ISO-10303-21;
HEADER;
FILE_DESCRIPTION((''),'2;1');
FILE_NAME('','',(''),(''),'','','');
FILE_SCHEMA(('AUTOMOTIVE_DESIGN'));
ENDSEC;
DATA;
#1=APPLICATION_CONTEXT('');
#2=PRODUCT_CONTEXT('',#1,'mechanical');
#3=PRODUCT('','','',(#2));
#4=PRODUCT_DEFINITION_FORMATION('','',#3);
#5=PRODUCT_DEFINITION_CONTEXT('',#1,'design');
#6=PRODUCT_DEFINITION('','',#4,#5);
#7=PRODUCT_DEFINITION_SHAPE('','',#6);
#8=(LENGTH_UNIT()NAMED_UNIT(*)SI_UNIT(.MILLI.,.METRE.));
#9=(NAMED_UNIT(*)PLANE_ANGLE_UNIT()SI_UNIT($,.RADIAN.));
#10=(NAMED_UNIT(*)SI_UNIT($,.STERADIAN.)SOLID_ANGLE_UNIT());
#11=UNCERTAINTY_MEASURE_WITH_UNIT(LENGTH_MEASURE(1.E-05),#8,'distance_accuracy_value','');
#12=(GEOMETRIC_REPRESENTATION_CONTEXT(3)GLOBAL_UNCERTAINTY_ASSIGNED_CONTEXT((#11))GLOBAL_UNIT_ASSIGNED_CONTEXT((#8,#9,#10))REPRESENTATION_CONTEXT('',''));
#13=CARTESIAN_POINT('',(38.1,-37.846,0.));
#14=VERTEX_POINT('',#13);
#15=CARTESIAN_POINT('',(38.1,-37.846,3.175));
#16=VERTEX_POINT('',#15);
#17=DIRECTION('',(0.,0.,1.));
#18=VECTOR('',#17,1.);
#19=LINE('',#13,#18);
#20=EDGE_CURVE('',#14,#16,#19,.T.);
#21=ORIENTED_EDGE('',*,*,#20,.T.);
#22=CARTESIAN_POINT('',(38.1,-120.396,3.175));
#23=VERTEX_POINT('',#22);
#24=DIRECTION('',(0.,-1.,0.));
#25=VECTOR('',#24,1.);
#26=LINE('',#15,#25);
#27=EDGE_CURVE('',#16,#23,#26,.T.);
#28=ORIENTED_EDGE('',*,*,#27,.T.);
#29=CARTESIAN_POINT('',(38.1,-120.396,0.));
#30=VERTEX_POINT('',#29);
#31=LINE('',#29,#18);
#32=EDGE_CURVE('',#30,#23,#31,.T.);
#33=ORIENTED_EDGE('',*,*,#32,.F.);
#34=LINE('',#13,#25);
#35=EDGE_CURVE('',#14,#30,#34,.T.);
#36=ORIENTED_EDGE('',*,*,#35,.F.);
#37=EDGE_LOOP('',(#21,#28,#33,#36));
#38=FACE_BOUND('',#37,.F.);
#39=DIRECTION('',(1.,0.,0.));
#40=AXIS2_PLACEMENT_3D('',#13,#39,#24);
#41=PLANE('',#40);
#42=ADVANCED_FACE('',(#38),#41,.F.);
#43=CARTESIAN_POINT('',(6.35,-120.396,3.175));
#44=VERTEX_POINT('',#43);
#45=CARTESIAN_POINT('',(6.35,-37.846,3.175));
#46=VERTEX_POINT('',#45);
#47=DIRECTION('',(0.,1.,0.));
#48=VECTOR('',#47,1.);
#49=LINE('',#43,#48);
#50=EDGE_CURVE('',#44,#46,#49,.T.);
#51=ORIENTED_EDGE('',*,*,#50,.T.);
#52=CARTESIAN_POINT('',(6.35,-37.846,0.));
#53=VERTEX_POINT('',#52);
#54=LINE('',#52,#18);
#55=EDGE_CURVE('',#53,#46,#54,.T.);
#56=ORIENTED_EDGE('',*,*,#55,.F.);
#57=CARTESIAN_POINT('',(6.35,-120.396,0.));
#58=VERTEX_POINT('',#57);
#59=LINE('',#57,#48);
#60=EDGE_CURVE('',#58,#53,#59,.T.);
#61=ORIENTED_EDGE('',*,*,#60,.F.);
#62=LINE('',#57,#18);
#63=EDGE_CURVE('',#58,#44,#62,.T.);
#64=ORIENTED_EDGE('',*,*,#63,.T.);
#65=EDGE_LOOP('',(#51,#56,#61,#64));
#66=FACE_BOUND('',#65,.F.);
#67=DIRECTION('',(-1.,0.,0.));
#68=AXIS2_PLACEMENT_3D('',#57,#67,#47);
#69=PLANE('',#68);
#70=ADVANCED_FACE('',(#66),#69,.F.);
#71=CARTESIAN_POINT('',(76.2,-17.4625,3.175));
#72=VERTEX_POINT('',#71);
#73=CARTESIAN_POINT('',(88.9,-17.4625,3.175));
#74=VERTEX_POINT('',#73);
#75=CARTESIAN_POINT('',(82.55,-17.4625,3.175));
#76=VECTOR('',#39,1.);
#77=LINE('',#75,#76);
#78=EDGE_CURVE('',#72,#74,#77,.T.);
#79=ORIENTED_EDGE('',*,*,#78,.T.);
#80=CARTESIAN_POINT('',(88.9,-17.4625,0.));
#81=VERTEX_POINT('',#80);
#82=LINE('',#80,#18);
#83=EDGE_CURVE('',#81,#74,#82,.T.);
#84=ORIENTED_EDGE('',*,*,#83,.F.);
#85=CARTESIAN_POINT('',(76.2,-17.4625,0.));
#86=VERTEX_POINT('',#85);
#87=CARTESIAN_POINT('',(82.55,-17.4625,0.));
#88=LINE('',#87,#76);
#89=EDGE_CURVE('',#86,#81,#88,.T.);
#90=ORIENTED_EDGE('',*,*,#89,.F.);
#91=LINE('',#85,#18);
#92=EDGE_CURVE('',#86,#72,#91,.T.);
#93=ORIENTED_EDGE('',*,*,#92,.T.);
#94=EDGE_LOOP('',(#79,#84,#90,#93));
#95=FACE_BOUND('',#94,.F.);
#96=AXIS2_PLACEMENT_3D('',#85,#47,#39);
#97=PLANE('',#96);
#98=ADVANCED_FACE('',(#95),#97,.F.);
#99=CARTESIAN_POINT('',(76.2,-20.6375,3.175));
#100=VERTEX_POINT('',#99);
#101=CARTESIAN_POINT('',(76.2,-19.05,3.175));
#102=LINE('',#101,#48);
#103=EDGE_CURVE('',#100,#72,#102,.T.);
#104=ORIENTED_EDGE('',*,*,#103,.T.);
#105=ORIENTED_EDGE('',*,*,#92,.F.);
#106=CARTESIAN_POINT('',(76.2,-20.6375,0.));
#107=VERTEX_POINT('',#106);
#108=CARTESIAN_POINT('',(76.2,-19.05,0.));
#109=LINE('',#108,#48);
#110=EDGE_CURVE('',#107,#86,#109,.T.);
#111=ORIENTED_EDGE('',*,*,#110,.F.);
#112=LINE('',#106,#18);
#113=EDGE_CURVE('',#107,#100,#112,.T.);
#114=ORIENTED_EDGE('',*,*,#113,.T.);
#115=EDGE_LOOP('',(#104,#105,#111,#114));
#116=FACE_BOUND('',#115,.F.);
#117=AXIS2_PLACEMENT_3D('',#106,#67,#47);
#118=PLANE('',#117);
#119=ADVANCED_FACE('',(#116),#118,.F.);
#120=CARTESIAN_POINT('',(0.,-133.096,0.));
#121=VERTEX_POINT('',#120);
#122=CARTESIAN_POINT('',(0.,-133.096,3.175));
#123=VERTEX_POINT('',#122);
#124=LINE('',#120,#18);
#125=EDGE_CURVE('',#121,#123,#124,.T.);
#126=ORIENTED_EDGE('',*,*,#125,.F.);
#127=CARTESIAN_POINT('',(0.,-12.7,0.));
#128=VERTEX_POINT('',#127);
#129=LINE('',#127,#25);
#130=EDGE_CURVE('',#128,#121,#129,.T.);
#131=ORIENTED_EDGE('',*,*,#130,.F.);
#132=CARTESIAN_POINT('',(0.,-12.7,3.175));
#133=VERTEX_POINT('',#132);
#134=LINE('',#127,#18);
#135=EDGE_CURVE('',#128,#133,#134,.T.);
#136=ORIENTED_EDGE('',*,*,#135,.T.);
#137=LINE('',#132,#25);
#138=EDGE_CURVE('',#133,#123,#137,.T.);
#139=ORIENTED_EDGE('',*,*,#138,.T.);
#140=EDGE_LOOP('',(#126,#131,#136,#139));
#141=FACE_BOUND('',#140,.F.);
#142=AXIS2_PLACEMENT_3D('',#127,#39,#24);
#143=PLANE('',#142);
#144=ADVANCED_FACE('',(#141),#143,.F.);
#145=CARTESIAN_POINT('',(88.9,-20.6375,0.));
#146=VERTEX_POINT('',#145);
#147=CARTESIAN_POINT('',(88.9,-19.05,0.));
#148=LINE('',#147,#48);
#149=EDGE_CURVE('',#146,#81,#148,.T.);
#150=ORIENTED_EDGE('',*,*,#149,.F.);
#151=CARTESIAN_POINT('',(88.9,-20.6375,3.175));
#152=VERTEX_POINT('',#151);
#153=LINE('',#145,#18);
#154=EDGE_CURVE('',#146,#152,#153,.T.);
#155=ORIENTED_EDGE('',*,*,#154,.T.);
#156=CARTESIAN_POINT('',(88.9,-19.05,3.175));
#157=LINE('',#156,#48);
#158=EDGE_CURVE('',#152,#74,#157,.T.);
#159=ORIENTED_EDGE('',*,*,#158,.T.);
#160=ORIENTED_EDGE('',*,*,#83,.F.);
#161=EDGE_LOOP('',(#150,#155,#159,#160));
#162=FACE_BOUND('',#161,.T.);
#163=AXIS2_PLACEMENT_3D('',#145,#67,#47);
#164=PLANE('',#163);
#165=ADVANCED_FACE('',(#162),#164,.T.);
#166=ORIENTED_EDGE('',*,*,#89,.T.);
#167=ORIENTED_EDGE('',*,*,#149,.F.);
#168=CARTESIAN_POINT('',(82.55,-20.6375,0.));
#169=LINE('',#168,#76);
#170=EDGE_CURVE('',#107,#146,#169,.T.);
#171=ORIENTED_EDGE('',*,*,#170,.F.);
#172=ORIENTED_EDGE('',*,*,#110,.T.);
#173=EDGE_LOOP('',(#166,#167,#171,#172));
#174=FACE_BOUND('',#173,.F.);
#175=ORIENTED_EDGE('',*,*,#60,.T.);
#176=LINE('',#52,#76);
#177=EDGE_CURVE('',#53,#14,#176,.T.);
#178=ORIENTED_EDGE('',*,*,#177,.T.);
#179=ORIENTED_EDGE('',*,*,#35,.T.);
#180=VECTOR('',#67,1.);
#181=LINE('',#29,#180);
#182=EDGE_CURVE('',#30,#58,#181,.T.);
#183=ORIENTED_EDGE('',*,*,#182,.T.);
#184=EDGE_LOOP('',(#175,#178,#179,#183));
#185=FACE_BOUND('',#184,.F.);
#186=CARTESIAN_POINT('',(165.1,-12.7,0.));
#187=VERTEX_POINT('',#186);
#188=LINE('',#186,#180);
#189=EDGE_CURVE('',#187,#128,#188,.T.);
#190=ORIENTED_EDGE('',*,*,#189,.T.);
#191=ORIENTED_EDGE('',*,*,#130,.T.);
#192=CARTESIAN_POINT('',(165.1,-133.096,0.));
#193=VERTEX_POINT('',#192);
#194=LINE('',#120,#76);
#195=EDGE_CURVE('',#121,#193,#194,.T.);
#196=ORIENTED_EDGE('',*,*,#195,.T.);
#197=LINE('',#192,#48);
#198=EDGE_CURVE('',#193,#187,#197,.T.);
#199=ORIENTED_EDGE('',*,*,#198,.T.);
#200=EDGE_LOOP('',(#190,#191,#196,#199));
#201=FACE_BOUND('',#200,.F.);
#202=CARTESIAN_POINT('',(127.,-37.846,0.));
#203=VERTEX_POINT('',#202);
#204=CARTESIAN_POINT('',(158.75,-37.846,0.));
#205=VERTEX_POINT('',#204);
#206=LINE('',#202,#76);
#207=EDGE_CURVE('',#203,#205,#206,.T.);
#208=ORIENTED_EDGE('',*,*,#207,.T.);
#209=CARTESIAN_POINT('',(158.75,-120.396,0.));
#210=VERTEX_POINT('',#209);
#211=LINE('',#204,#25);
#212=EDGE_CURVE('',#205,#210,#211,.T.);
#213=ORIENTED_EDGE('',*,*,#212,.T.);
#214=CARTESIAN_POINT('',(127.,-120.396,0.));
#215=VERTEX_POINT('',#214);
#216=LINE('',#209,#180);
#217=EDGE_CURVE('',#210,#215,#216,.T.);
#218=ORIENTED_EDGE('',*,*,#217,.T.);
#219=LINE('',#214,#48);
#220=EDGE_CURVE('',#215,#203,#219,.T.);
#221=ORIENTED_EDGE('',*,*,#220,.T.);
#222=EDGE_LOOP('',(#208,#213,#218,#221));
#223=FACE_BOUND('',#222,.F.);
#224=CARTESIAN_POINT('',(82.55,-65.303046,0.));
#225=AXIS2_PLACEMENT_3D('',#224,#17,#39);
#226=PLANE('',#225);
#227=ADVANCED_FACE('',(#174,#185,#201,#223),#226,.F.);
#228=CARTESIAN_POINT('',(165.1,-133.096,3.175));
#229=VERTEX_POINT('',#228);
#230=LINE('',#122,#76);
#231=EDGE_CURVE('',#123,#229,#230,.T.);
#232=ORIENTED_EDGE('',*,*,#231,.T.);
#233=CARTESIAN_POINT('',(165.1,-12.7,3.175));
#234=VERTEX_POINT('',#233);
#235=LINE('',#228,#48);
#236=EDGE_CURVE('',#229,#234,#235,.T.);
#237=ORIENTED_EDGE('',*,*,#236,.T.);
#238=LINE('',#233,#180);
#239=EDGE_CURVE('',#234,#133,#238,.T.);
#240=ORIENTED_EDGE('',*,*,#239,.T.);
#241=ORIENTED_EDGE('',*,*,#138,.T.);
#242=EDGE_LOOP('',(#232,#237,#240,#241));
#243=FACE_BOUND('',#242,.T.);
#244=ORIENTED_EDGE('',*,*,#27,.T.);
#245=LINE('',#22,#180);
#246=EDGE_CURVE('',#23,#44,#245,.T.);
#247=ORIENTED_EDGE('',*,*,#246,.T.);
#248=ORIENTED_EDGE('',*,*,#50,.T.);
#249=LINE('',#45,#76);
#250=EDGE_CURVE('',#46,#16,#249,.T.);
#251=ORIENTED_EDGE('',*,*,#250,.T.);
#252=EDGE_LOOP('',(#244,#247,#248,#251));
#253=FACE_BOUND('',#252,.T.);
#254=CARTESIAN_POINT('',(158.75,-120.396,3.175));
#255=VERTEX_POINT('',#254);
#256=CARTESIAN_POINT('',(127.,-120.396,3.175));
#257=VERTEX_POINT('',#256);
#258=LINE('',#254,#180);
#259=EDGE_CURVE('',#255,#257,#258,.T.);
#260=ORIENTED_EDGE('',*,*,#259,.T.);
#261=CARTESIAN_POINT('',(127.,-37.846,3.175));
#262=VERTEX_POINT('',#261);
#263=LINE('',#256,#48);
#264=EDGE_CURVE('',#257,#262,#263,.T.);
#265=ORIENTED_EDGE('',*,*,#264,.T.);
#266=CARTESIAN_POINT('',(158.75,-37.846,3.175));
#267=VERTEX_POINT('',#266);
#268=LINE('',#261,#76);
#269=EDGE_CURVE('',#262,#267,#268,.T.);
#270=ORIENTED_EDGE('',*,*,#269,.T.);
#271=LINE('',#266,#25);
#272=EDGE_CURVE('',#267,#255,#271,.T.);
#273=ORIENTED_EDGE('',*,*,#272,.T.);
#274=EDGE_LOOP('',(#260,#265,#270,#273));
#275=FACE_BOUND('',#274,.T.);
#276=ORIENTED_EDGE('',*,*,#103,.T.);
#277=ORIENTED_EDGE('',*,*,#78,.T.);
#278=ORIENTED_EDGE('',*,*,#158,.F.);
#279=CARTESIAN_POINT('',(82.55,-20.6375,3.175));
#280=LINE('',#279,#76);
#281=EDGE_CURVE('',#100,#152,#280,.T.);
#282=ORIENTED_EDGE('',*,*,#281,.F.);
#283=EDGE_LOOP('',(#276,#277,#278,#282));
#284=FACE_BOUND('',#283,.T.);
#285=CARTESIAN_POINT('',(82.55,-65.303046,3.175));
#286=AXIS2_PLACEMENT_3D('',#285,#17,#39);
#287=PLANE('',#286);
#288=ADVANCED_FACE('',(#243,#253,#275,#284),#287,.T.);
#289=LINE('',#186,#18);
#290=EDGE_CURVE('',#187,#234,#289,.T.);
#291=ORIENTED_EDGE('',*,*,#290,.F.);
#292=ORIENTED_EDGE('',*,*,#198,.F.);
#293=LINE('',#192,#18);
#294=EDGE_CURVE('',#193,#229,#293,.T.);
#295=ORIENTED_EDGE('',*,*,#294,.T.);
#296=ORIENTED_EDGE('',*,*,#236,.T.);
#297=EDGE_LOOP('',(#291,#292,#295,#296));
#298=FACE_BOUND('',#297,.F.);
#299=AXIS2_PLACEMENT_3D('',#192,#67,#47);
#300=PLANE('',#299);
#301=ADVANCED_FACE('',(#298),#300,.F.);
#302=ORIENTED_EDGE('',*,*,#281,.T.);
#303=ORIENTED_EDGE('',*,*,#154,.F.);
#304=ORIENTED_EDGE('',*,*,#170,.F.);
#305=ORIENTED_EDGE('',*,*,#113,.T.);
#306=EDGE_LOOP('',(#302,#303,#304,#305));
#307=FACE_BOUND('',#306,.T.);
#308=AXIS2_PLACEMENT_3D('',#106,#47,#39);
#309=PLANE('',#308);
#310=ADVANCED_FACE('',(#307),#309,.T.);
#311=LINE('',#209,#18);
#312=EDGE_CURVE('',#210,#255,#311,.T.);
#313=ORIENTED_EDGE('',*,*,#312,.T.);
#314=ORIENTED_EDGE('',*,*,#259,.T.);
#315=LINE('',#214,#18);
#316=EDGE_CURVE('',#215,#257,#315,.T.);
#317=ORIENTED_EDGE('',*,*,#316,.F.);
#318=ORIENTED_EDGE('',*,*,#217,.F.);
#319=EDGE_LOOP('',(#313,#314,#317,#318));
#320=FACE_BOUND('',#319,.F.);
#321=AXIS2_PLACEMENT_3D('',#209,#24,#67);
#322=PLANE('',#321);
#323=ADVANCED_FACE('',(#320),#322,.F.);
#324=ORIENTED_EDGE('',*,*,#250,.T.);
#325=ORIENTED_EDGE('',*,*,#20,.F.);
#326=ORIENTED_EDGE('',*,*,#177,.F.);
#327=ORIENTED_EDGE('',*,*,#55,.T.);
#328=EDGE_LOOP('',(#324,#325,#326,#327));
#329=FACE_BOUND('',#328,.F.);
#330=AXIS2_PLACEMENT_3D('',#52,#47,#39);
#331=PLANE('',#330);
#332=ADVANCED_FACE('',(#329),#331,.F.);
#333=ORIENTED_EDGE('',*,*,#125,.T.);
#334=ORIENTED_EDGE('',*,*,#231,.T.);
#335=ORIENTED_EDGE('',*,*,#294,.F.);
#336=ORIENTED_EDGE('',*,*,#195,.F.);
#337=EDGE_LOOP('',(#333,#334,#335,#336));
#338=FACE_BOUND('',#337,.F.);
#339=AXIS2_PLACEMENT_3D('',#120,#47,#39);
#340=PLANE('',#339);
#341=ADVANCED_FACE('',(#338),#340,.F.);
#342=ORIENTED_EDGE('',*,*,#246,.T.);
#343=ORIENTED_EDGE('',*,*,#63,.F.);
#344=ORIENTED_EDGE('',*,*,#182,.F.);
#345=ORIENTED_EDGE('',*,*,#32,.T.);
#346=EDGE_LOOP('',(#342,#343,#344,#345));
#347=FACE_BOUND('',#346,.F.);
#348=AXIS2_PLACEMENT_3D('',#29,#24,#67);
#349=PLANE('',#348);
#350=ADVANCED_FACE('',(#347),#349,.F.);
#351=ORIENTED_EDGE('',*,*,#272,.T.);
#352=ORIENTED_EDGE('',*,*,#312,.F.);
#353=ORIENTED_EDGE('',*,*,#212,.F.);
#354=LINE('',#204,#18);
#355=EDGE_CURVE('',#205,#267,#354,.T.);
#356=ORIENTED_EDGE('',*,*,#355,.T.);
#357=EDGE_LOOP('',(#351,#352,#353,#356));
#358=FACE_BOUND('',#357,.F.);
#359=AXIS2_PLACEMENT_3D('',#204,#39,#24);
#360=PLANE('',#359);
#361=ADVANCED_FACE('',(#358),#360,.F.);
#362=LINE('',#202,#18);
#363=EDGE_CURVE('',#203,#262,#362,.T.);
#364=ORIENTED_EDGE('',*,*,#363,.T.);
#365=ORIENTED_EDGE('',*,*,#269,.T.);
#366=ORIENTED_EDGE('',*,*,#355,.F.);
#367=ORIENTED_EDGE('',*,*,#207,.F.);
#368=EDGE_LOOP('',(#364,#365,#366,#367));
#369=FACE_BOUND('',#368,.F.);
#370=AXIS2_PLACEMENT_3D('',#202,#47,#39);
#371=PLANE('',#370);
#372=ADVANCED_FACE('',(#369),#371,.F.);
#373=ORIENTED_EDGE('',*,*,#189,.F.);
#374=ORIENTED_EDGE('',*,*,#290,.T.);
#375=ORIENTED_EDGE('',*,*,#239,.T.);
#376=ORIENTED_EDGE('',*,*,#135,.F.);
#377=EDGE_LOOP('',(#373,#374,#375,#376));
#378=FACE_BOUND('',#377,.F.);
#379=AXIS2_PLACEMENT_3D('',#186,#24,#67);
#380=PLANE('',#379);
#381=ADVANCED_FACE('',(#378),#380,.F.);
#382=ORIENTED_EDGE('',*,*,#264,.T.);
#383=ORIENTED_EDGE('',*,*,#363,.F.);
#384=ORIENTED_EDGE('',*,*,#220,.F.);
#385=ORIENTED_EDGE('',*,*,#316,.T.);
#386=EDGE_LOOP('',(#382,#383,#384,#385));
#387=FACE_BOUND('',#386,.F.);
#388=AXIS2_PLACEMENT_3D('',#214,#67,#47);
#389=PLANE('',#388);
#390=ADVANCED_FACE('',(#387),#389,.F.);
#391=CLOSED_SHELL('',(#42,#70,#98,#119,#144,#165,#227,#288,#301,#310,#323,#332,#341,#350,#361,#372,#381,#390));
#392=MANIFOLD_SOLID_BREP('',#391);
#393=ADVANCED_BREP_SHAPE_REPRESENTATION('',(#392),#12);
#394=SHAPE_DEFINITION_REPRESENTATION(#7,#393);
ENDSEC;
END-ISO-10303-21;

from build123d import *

# Parameters (mm, degrees)
F0_W     = 12.7
F0_H     = 3.175
F1_DEPTH = 3.175


# Not quite as in the source:
# - a feature names something its author has since deleted; it is built from what else it names


with BuildPart() as f1:
    # F0 (on Top) → F1 (new body)
    with BuildSketch(Plane.XY):
        Polygon((0, -12.7), (0, -120.396), (6.35, -120.396), (6.35, -37.846), (38.1, -37.846), (38.1, -120.396), (127, -120.396), (127, -37.846), (158.75, -37.846), (158.75, -120.396), (165.1, -120.396), (165.1, -12.7), align=None)
        with Locations((82.55, -19.05)):
            Rectangle(F0_W, F0_H, mode=Mode.SUBTRACT)
        Polygon((6.35, -120.396), (0, -120.396), (0, -133.096), (165.1, -133.096), (165.1, -120.396), (158.75, -120.396), (127, -120.396), (38.1, -120.396), align=None)
    extrude(amount=F1_DEPTH)


solid = f1.part
